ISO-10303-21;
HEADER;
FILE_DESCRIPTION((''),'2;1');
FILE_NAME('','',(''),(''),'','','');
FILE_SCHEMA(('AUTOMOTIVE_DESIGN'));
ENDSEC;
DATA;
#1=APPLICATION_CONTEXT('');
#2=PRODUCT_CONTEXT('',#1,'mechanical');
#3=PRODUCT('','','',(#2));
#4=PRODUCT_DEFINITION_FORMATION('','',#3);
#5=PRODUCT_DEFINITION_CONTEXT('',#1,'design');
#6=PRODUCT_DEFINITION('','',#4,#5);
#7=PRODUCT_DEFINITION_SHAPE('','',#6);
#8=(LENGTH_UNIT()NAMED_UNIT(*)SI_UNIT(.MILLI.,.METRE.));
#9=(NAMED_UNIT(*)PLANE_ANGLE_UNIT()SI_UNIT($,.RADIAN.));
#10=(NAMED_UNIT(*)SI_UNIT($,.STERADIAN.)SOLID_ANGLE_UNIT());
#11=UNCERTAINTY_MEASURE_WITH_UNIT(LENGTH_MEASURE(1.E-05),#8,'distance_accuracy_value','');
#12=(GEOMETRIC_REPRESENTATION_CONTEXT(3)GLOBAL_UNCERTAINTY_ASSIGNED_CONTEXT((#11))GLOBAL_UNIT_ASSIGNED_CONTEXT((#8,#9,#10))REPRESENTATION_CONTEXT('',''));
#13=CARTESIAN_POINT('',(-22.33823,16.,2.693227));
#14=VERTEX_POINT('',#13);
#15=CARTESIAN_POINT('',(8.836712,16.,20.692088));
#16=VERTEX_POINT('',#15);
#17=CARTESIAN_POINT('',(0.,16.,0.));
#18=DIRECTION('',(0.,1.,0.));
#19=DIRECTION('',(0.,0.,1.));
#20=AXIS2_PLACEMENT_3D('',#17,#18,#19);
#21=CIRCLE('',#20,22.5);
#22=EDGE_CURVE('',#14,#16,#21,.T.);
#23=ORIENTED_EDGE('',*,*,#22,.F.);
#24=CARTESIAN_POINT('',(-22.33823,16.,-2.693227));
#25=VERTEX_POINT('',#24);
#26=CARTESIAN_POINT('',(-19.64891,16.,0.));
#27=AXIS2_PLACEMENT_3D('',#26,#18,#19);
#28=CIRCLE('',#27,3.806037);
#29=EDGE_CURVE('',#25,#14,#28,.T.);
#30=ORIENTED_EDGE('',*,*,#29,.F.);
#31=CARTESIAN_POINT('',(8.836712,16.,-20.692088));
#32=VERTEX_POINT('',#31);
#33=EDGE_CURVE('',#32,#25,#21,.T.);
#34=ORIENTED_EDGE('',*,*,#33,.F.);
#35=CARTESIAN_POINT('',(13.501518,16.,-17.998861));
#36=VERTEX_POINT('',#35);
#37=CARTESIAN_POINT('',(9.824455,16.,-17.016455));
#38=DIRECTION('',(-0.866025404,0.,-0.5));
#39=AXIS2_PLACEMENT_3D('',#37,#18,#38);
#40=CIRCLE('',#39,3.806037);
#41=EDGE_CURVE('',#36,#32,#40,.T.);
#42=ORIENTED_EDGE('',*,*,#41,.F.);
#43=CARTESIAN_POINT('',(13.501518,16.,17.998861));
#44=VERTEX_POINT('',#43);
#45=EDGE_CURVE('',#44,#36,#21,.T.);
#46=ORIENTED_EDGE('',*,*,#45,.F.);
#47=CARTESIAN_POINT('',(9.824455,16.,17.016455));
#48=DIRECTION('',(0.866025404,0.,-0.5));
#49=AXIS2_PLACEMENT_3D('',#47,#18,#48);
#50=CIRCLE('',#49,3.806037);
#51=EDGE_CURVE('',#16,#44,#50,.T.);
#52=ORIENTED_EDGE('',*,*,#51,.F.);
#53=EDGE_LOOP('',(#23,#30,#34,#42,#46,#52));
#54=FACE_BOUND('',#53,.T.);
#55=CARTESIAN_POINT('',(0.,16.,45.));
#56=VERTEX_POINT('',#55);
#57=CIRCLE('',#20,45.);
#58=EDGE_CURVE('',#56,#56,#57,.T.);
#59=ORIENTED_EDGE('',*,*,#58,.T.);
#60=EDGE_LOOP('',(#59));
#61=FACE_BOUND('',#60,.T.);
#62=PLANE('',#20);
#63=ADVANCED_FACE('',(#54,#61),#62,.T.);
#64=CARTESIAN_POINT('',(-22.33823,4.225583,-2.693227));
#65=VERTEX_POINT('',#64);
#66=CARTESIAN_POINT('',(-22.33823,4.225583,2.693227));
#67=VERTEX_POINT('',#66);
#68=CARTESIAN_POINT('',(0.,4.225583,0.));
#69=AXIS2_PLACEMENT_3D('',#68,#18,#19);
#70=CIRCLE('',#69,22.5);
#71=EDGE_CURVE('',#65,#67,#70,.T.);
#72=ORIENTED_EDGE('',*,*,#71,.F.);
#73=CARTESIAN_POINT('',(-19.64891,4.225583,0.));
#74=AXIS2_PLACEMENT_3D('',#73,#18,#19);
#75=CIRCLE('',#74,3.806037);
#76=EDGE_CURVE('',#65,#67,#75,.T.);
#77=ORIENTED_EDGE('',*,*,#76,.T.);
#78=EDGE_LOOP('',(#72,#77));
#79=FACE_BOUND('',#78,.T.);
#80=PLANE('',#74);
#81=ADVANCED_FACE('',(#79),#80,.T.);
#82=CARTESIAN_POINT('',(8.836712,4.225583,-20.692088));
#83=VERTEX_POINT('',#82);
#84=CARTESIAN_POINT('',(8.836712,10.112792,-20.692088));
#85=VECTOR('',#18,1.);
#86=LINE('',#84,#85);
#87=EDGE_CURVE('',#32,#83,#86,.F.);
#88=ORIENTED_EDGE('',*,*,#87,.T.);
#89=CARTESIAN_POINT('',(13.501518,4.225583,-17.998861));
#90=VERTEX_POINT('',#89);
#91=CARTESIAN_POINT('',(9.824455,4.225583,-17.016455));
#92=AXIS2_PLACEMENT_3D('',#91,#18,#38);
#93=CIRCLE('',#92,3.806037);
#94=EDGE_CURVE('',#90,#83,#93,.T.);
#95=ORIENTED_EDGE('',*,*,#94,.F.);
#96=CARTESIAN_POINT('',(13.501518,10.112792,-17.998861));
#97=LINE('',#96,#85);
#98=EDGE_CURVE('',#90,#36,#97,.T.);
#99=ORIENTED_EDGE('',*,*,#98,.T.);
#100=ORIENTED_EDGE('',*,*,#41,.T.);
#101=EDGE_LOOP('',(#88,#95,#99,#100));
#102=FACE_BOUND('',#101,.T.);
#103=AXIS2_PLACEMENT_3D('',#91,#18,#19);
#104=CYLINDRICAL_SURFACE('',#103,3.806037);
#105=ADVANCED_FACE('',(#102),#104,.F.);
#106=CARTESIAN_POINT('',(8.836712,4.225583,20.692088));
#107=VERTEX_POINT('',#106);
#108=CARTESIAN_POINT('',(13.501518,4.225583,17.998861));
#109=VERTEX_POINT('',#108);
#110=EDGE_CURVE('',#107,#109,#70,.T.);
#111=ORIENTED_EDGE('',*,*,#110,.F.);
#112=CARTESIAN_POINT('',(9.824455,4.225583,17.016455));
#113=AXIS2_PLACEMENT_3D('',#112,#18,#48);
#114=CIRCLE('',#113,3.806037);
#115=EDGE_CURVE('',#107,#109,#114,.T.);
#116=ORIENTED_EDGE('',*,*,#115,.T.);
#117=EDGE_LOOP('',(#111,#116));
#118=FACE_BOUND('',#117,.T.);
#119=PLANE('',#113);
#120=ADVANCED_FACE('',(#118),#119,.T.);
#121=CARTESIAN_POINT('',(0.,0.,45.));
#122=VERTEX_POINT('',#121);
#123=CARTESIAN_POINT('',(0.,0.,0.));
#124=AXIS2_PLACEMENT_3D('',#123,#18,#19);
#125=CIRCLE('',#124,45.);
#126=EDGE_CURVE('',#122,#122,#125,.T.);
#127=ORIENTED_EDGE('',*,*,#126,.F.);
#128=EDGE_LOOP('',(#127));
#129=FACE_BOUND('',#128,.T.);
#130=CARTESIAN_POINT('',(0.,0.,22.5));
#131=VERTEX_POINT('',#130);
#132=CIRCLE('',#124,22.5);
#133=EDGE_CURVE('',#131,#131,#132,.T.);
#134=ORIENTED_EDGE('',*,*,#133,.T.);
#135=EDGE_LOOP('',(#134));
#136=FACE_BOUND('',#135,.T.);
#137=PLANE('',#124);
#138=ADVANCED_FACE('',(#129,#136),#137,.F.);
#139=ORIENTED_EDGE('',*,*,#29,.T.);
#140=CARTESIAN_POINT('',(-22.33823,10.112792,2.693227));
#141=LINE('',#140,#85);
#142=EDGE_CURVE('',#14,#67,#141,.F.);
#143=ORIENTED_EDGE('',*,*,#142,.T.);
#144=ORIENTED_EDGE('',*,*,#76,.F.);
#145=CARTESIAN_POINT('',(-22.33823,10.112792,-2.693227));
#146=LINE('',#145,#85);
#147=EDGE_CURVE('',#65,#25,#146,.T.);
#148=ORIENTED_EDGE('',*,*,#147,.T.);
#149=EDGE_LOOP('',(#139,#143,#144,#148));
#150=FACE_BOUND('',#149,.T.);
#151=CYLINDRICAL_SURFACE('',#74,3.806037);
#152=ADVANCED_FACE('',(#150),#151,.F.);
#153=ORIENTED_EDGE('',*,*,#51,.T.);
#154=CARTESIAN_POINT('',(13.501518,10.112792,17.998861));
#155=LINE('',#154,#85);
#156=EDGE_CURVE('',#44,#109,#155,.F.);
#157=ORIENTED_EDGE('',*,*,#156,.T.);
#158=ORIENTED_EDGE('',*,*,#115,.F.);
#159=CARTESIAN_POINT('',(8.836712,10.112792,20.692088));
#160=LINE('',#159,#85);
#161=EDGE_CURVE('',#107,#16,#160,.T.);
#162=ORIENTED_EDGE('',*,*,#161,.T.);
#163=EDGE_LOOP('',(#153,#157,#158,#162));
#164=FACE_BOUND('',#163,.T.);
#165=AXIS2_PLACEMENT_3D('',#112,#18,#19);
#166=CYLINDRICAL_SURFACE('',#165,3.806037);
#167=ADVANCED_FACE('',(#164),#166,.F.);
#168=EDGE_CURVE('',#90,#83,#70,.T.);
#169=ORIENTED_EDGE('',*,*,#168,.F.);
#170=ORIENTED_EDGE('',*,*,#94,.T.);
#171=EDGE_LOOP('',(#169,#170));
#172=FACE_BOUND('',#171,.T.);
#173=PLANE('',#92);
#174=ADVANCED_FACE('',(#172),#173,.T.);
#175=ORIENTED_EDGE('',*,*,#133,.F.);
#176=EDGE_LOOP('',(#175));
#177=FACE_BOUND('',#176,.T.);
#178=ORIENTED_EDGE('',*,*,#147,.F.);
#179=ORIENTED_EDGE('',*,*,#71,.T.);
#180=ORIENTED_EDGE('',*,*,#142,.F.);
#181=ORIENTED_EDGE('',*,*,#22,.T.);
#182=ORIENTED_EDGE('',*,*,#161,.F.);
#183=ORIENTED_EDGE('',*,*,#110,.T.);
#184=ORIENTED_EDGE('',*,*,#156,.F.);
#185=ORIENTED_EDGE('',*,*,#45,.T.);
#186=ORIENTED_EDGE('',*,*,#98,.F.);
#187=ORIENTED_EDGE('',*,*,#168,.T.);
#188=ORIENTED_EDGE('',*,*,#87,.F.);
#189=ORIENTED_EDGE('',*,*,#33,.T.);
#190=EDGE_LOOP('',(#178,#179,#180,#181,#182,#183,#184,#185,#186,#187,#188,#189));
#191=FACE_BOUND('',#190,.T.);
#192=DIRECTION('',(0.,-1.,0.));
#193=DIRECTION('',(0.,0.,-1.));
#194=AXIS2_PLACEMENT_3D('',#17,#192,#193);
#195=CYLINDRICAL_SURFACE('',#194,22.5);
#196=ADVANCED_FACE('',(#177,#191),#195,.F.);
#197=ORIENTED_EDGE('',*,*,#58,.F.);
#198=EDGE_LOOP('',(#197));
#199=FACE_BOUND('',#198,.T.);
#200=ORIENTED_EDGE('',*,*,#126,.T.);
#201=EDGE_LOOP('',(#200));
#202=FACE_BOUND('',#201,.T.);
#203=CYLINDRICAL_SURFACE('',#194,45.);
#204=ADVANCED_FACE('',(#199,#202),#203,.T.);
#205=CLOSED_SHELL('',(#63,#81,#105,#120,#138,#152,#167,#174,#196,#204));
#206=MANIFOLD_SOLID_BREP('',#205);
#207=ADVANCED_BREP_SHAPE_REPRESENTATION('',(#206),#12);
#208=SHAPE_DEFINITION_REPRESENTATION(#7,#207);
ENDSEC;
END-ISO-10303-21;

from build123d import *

# Parameters (mm, degrees)
SKETCH1_R           = 45
BOSS_EXTRUDE1_DEPTH = 16
SKETCH2_R           = 22.5
CUT_EXTRUDE1_DEPTH  = 66.620118866
SKETCH3_R           = 3.806036854
CUT_EXTRUDE2_DEPTH  = 11.774416519
CIRPATTERN1_COUNT   = 3


with BuildPart() as part:
    # Sketch1 → Boss-Extrude1 (new body)
    with BuildSketch(Plane(origin=(0, 0, 0), x_dir=(1, 0, 0), z_dir=(0, 1, 0))):
        Circle(SKETCH1_R)
    extrude(amount=BOSS_EXTRUDE1_DEPTH)

    # Sketch2 → Cut-Extrude1 (cut, through all)
    with BuildSketch(Plane(origin=(0, 0, 0), x_dir=(1, 0, 0), z_dir=(0, 1, 0))):
        Circle(SKETCH2_R)
    extrude(amount=CUT_EXTRUDE1_DEPTH, mode=Mode.SUBTRACT)

    # Sketch3 → Cut-Extrude2 (cut)
    with BuildSketch(Plane(origin=(0, 16, 0), x_dir=(1, 0, 0), z_dir=(0, 1, 0))):
        with Locations((-19.648909767, 0)):
            Circle(SKETCH3_R)
    cut_extrude2 = extrude(amount=-CUT_EXTRUDE2_DEPTH, mode=Mode.SUBTRACT)

    # CirPattern1: Cut-Extrude2 ×3 about axis
    cirpattern1_axis = Axis((0, 0, 0), (0, 1, 0))
    for i in range(1, CIRPATTERN1_COUNT):
        add(cut_extrude2.rotate(cirpattern1_axis, i * 360 / CIRPATTERN1_COUNT), mode=Mode.SUBTRACT)


solid = part.part
